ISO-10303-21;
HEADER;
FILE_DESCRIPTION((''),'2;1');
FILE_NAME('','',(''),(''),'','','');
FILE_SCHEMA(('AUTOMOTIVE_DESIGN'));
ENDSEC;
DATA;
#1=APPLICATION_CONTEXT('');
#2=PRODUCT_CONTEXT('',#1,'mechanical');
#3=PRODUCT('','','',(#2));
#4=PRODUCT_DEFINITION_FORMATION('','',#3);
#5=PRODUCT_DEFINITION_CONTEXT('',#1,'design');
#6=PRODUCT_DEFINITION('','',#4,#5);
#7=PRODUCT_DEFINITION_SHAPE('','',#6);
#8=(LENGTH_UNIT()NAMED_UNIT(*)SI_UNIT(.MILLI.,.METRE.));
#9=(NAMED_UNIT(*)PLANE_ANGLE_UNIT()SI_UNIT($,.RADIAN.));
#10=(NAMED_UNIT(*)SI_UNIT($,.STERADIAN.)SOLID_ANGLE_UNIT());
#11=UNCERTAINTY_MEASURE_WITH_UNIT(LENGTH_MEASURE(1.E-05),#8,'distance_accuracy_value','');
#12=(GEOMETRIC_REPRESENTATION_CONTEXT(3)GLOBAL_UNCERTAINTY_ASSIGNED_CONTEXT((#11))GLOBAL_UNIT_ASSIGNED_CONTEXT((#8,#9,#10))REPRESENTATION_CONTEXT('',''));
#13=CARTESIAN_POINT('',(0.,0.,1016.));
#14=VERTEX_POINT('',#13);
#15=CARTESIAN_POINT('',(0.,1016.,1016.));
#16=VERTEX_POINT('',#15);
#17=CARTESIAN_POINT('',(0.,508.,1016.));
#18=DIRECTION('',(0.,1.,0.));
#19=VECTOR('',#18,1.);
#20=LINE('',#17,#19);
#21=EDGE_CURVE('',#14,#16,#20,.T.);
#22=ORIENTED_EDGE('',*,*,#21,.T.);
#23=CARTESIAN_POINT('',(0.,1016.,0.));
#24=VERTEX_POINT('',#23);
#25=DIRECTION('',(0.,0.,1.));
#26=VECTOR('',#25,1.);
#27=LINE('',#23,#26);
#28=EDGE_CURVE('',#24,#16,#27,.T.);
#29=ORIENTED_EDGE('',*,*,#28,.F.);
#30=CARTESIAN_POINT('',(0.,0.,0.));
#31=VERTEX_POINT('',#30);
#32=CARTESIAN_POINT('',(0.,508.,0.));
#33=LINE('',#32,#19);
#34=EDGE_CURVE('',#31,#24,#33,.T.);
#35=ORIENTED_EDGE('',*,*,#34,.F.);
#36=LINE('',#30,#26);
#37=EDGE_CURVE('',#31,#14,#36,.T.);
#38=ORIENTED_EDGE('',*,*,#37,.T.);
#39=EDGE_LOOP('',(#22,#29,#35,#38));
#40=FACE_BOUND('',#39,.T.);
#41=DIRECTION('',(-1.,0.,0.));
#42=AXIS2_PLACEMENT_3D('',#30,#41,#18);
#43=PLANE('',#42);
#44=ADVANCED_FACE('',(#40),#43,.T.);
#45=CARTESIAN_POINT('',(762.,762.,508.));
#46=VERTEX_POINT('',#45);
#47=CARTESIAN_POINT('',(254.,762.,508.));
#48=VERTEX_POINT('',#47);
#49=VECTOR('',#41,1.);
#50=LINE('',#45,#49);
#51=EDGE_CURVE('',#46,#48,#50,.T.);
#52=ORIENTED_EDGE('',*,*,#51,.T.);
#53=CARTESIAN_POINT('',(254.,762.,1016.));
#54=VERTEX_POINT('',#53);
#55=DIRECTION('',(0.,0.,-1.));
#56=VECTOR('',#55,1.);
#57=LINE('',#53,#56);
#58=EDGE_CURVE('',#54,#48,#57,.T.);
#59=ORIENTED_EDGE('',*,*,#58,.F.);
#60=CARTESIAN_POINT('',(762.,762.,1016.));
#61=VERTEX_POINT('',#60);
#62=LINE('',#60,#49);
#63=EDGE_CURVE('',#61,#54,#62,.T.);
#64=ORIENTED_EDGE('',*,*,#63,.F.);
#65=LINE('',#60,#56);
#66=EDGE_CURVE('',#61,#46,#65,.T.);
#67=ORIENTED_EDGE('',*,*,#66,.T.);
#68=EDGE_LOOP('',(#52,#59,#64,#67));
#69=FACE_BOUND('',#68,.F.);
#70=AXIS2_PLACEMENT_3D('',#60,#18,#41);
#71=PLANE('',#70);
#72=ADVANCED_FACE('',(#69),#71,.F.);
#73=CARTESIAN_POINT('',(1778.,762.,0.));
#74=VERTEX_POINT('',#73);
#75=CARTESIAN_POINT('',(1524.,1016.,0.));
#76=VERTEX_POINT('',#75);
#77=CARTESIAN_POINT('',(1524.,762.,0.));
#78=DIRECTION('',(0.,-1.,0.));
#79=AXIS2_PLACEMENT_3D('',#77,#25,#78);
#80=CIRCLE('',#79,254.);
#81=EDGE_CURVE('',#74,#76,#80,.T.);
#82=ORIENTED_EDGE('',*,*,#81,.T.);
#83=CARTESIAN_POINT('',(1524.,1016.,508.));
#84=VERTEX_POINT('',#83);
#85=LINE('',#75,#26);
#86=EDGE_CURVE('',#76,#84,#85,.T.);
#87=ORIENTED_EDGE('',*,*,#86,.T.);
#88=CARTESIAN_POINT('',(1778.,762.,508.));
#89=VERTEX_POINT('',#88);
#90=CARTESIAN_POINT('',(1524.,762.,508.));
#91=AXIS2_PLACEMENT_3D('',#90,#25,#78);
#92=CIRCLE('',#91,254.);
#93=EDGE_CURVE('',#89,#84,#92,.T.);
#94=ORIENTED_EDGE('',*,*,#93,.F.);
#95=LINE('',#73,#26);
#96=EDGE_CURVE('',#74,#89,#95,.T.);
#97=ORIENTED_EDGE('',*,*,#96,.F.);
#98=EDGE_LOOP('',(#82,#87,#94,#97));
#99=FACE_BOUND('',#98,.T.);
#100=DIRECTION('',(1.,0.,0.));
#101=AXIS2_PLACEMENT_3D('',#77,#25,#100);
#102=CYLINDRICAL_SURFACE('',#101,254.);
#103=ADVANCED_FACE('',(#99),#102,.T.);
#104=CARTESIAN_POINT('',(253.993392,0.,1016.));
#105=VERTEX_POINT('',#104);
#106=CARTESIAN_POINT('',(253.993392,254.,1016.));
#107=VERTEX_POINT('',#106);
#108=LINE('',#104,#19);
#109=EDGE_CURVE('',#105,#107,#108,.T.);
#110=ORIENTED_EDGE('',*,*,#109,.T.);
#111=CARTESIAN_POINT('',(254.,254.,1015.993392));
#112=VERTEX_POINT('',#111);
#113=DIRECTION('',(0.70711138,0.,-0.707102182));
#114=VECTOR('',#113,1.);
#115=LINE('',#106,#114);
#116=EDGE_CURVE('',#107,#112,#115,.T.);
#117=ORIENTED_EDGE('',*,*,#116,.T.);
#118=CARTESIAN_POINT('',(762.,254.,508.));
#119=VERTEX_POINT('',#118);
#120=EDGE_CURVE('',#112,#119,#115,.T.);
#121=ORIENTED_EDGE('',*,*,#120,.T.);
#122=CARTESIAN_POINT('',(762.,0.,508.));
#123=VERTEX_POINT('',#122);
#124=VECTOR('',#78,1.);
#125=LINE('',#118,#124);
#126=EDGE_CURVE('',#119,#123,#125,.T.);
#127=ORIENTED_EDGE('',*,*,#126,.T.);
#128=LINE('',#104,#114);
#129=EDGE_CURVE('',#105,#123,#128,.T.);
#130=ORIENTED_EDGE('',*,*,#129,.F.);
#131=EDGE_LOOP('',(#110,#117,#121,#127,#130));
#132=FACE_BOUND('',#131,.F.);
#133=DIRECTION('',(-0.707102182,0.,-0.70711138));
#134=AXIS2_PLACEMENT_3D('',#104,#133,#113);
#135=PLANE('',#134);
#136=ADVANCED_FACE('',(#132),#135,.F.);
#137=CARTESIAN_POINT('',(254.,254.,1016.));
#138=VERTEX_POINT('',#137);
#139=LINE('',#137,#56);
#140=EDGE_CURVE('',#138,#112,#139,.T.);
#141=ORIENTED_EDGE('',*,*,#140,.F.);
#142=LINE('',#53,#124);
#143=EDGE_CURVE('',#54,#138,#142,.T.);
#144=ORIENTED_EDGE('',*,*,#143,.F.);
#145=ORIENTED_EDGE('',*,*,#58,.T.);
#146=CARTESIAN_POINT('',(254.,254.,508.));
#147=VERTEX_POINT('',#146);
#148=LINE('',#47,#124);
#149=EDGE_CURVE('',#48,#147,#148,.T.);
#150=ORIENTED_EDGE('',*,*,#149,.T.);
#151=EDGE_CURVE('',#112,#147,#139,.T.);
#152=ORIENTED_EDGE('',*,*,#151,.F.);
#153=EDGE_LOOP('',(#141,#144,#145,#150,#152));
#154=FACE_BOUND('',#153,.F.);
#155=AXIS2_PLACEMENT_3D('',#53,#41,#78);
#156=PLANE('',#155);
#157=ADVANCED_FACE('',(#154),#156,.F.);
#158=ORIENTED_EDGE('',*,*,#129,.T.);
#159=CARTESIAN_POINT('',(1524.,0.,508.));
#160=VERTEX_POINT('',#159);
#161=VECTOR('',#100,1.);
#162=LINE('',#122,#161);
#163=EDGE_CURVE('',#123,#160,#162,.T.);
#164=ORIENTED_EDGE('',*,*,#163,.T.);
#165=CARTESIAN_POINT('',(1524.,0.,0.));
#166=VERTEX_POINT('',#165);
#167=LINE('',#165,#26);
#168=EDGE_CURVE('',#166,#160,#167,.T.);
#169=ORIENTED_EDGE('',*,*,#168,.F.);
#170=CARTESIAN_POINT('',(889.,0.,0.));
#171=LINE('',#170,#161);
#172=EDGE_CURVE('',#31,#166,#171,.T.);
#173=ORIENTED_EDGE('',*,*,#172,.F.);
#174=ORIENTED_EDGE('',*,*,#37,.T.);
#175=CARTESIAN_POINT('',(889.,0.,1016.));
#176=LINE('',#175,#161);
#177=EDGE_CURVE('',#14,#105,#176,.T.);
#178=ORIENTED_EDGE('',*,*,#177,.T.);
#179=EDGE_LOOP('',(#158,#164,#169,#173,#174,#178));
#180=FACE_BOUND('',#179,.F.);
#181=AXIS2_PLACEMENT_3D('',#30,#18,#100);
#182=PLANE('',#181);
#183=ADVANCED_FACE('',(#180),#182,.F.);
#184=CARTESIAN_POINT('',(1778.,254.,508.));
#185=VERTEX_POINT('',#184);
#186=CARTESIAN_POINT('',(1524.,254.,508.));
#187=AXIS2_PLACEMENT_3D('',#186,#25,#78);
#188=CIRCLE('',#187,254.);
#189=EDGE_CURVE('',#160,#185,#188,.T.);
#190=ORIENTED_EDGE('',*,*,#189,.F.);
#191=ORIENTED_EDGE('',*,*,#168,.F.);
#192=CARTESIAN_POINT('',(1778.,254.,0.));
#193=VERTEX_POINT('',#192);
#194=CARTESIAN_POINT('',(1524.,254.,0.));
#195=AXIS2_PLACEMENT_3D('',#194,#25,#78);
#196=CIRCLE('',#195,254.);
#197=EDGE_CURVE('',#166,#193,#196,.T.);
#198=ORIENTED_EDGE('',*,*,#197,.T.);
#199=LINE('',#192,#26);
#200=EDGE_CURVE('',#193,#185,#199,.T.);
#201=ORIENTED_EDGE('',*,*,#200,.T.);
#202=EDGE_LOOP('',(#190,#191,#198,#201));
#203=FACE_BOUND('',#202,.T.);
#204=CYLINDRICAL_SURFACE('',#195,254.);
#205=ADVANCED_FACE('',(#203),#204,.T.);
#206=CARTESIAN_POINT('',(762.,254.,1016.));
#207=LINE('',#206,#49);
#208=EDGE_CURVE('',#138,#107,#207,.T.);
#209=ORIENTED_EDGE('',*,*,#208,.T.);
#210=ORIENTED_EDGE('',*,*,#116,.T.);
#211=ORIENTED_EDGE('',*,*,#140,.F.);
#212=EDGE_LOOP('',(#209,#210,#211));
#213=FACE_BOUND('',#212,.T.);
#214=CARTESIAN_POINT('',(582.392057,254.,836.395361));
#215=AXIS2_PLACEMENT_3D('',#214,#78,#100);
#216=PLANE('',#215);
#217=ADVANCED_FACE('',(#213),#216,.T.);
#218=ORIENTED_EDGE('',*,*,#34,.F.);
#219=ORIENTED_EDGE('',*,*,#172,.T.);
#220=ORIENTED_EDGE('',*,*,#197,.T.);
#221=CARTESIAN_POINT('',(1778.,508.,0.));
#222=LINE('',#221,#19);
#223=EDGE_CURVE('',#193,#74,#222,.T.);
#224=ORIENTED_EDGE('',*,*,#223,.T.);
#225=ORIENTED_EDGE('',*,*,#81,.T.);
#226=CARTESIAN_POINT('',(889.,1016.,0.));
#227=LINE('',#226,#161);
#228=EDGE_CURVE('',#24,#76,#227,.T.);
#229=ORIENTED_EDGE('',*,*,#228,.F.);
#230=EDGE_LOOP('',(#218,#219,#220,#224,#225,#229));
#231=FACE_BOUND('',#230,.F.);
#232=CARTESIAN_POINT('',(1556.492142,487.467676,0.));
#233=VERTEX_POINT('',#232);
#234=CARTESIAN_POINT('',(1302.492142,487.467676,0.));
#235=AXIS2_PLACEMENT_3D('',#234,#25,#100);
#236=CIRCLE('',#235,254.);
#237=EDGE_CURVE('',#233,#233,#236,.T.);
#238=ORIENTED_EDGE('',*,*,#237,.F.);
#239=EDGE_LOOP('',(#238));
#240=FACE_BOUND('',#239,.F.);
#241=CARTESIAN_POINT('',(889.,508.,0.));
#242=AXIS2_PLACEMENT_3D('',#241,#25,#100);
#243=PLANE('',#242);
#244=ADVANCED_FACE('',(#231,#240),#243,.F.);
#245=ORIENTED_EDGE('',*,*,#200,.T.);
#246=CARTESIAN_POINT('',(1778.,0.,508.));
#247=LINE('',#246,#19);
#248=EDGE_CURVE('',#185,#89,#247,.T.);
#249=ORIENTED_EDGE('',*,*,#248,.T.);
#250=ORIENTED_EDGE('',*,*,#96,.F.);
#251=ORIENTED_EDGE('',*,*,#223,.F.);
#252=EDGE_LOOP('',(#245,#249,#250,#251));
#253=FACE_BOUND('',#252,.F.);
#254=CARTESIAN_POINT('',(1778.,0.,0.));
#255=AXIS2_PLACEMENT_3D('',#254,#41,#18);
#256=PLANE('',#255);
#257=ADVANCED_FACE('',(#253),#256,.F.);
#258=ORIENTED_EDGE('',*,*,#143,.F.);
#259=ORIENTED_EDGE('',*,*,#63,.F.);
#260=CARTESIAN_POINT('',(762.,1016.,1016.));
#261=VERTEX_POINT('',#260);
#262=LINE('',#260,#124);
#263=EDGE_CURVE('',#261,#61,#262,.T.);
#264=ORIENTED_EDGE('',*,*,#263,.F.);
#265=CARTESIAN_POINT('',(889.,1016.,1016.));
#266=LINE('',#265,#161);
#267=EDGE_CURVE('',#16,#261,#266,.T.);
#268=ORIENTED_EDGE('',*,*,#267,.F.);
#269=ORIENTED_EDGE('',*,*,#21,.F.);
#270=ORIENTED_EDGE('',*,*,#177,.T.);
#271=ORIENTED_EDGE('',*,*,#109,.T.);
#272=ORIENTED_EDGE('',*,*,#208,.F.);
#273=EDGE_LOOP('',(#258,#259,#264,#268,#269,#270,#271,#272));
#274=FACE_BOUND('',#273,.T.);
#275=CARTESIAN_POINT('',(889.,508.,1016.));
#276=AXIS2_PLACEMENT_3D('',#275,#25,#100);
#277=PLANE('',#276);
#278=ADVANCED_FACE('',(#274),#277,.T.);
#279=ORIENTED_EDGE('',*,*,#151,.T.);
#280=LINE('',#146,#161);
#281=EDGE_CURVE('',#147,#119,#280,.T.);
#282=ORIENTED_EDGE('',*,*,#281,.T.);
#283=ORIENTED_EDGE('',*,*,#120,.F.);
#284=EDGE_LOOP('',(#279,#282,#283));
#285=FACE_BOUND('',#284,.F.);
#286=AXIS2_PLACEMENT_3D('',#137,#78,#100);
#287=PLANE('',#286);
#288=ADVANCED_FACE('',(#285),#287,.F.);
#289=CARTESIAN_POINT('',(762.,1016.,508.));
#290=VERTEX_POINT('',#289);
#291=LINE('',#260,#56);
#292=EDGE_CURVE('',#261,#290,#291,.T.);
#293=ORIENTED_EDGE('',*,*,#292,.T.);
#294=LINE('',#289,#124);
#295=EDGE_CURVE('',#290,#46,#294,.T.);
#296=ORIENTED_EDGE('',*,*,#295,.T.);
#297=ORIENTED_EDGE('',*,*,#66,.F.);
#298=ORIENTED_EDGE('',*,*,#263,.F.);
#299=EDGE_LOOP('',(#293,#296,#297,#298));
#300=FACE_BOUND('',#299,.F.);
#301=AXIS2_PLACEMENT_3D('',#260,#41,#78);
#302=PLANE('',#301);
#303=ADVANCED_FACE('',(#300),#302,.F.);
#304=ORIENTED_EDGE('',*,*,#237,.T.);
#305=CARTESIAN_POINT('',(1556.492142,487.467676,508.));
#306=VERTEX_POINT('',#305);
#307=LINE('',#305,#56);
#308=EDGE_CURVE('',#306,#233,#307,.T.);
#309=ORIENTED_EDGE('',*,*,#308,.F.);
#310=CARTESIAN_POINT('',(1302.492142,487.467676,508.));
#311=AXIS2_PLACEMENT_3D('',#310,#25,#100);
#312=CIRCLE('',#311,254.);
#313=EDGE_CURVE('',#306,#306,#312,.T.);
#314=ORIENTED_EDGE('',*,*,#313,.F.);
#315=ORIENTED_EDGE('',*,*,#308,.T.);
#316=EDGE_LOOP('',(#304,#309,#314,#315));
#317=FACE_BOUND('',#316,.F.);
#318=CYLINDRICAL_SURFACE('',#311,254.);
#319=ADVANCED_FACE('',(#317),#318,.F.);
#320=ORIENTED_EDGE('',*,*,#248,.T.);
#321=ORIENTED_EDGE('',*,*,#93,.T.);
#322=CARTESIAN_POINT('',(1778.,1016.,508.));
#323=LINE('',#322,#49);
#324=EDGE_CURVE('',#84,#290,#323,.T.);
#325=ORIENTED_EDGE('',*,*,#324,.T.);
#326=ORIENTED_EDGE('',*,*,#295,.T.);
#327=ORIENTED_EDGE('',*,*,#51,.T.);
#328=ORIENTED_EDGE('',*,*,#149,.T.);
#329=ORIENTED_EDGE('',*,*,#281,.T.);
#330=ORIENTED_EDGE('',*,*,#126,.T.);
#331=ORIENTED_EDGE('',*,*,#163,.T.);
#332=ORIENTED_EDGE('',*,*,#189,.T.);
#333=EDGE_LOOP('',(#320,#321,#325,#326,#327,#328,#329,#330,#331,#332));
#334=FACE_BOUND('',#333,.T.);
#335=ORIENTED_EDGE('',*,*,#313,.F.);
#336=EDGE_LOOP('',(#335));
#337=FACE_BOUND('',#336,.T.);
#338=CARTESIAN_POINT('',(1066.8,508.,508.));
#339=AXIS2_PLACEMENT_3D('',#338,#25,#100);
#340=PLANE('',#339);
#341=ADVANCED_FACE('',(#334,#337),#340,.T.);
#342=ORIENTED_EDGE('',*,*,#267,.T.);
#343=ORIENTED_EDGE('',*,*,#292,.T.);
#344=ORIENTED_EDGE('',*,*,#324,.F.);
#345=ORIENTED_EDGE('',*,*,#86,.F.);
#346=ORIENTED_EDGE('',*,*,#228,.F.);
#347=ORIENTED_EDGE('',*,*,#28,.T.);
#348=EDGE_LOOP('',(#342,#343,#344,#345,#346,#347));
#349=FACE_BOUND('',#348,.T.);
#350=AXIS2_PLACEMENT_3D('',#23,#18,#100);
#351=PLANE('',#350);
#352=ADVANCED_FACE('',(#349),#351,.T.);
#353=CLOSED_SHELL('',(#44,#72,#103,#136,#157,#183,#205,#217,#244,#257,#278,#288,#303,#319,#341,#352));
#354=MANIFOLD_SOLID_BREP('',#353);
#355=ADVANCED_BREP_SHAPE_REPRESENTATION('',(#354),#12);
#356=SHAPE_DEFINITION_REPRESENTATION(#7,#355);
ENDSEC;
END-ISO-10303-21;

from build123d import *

# Parameters (mm, degrees)
F0_W     = 1778
F0_H     = 1016
F1_DEPTH = 1016
F3_DEPTH = 508
F6_DEPTH = 254
F4_W     = 508
F4_H     = 254
F7_DEPTH = 175.26
F8_R     = 254
F9_DEPTH = 508
F10_R    = 254
F11_R    = 254


with BuildPart() as f1:
    # F0 (on Top) → F1 (new body)
    with BuildSketch(Plane.XY):
        with Locations((889, 508)):
            Rectangle(F0_W, F0_H)
    extrude(amount=F1_DEPTH)

    # F2 (on face) → F3 (cut)
    with BuildSketch(Plane.XY.offset(1016)):
        Polygon((1778, 1016), (762, 1016), (762, 762), (254, 762), (254, 254), (762, 254), (762, 0), (1778, 0), align=None)
    extrude(amount=-F3_DEPTH, mode=Mode.SUBTRACT)

    # F5 (on face) → F6 (cut)
    with BuildSketch(Plane.XZ):
        Polygon((762, 1016), (253.9933919907, 1016), (762, 508), align=None)
    extrude(amount=-F6_DEPTH, mode=Mode.SUBTRACT)

    # F4 (on face) → F7 (cut)
    with BuildSketch(Plane.XY.offset(1016)):
        with Locations((508, 127)):
            Rectangle(F4_W, F4_H)
    extrude(amount=F7_DEPTH, mode=Mode.SUBTRACT)

    # F8 (on face) → F9 (cut)
    with BuildSketch(Plane.XY.offset(508)):
        with Locations((1302.4921417236, 487.4676764011)):
            Circle(F8_R)
    extrude(amount=-F9_DEPTH, mode=Mode.SUBTRACT)

    # F10
    f10_edges = [f1.edges().sort_by_distance(p)[0] for p in [
        (1778, 0, 254),
    ]]
    fillet(f10_edges, radius=F10_R)

    # F11
    f11_edges = [f1.edges().sort_by_distance(p)[0] for p in [
        (1778, 1016, 254),
    ]]
    fillet(f11_edges, radius=F11_R)


solid = f1.part
